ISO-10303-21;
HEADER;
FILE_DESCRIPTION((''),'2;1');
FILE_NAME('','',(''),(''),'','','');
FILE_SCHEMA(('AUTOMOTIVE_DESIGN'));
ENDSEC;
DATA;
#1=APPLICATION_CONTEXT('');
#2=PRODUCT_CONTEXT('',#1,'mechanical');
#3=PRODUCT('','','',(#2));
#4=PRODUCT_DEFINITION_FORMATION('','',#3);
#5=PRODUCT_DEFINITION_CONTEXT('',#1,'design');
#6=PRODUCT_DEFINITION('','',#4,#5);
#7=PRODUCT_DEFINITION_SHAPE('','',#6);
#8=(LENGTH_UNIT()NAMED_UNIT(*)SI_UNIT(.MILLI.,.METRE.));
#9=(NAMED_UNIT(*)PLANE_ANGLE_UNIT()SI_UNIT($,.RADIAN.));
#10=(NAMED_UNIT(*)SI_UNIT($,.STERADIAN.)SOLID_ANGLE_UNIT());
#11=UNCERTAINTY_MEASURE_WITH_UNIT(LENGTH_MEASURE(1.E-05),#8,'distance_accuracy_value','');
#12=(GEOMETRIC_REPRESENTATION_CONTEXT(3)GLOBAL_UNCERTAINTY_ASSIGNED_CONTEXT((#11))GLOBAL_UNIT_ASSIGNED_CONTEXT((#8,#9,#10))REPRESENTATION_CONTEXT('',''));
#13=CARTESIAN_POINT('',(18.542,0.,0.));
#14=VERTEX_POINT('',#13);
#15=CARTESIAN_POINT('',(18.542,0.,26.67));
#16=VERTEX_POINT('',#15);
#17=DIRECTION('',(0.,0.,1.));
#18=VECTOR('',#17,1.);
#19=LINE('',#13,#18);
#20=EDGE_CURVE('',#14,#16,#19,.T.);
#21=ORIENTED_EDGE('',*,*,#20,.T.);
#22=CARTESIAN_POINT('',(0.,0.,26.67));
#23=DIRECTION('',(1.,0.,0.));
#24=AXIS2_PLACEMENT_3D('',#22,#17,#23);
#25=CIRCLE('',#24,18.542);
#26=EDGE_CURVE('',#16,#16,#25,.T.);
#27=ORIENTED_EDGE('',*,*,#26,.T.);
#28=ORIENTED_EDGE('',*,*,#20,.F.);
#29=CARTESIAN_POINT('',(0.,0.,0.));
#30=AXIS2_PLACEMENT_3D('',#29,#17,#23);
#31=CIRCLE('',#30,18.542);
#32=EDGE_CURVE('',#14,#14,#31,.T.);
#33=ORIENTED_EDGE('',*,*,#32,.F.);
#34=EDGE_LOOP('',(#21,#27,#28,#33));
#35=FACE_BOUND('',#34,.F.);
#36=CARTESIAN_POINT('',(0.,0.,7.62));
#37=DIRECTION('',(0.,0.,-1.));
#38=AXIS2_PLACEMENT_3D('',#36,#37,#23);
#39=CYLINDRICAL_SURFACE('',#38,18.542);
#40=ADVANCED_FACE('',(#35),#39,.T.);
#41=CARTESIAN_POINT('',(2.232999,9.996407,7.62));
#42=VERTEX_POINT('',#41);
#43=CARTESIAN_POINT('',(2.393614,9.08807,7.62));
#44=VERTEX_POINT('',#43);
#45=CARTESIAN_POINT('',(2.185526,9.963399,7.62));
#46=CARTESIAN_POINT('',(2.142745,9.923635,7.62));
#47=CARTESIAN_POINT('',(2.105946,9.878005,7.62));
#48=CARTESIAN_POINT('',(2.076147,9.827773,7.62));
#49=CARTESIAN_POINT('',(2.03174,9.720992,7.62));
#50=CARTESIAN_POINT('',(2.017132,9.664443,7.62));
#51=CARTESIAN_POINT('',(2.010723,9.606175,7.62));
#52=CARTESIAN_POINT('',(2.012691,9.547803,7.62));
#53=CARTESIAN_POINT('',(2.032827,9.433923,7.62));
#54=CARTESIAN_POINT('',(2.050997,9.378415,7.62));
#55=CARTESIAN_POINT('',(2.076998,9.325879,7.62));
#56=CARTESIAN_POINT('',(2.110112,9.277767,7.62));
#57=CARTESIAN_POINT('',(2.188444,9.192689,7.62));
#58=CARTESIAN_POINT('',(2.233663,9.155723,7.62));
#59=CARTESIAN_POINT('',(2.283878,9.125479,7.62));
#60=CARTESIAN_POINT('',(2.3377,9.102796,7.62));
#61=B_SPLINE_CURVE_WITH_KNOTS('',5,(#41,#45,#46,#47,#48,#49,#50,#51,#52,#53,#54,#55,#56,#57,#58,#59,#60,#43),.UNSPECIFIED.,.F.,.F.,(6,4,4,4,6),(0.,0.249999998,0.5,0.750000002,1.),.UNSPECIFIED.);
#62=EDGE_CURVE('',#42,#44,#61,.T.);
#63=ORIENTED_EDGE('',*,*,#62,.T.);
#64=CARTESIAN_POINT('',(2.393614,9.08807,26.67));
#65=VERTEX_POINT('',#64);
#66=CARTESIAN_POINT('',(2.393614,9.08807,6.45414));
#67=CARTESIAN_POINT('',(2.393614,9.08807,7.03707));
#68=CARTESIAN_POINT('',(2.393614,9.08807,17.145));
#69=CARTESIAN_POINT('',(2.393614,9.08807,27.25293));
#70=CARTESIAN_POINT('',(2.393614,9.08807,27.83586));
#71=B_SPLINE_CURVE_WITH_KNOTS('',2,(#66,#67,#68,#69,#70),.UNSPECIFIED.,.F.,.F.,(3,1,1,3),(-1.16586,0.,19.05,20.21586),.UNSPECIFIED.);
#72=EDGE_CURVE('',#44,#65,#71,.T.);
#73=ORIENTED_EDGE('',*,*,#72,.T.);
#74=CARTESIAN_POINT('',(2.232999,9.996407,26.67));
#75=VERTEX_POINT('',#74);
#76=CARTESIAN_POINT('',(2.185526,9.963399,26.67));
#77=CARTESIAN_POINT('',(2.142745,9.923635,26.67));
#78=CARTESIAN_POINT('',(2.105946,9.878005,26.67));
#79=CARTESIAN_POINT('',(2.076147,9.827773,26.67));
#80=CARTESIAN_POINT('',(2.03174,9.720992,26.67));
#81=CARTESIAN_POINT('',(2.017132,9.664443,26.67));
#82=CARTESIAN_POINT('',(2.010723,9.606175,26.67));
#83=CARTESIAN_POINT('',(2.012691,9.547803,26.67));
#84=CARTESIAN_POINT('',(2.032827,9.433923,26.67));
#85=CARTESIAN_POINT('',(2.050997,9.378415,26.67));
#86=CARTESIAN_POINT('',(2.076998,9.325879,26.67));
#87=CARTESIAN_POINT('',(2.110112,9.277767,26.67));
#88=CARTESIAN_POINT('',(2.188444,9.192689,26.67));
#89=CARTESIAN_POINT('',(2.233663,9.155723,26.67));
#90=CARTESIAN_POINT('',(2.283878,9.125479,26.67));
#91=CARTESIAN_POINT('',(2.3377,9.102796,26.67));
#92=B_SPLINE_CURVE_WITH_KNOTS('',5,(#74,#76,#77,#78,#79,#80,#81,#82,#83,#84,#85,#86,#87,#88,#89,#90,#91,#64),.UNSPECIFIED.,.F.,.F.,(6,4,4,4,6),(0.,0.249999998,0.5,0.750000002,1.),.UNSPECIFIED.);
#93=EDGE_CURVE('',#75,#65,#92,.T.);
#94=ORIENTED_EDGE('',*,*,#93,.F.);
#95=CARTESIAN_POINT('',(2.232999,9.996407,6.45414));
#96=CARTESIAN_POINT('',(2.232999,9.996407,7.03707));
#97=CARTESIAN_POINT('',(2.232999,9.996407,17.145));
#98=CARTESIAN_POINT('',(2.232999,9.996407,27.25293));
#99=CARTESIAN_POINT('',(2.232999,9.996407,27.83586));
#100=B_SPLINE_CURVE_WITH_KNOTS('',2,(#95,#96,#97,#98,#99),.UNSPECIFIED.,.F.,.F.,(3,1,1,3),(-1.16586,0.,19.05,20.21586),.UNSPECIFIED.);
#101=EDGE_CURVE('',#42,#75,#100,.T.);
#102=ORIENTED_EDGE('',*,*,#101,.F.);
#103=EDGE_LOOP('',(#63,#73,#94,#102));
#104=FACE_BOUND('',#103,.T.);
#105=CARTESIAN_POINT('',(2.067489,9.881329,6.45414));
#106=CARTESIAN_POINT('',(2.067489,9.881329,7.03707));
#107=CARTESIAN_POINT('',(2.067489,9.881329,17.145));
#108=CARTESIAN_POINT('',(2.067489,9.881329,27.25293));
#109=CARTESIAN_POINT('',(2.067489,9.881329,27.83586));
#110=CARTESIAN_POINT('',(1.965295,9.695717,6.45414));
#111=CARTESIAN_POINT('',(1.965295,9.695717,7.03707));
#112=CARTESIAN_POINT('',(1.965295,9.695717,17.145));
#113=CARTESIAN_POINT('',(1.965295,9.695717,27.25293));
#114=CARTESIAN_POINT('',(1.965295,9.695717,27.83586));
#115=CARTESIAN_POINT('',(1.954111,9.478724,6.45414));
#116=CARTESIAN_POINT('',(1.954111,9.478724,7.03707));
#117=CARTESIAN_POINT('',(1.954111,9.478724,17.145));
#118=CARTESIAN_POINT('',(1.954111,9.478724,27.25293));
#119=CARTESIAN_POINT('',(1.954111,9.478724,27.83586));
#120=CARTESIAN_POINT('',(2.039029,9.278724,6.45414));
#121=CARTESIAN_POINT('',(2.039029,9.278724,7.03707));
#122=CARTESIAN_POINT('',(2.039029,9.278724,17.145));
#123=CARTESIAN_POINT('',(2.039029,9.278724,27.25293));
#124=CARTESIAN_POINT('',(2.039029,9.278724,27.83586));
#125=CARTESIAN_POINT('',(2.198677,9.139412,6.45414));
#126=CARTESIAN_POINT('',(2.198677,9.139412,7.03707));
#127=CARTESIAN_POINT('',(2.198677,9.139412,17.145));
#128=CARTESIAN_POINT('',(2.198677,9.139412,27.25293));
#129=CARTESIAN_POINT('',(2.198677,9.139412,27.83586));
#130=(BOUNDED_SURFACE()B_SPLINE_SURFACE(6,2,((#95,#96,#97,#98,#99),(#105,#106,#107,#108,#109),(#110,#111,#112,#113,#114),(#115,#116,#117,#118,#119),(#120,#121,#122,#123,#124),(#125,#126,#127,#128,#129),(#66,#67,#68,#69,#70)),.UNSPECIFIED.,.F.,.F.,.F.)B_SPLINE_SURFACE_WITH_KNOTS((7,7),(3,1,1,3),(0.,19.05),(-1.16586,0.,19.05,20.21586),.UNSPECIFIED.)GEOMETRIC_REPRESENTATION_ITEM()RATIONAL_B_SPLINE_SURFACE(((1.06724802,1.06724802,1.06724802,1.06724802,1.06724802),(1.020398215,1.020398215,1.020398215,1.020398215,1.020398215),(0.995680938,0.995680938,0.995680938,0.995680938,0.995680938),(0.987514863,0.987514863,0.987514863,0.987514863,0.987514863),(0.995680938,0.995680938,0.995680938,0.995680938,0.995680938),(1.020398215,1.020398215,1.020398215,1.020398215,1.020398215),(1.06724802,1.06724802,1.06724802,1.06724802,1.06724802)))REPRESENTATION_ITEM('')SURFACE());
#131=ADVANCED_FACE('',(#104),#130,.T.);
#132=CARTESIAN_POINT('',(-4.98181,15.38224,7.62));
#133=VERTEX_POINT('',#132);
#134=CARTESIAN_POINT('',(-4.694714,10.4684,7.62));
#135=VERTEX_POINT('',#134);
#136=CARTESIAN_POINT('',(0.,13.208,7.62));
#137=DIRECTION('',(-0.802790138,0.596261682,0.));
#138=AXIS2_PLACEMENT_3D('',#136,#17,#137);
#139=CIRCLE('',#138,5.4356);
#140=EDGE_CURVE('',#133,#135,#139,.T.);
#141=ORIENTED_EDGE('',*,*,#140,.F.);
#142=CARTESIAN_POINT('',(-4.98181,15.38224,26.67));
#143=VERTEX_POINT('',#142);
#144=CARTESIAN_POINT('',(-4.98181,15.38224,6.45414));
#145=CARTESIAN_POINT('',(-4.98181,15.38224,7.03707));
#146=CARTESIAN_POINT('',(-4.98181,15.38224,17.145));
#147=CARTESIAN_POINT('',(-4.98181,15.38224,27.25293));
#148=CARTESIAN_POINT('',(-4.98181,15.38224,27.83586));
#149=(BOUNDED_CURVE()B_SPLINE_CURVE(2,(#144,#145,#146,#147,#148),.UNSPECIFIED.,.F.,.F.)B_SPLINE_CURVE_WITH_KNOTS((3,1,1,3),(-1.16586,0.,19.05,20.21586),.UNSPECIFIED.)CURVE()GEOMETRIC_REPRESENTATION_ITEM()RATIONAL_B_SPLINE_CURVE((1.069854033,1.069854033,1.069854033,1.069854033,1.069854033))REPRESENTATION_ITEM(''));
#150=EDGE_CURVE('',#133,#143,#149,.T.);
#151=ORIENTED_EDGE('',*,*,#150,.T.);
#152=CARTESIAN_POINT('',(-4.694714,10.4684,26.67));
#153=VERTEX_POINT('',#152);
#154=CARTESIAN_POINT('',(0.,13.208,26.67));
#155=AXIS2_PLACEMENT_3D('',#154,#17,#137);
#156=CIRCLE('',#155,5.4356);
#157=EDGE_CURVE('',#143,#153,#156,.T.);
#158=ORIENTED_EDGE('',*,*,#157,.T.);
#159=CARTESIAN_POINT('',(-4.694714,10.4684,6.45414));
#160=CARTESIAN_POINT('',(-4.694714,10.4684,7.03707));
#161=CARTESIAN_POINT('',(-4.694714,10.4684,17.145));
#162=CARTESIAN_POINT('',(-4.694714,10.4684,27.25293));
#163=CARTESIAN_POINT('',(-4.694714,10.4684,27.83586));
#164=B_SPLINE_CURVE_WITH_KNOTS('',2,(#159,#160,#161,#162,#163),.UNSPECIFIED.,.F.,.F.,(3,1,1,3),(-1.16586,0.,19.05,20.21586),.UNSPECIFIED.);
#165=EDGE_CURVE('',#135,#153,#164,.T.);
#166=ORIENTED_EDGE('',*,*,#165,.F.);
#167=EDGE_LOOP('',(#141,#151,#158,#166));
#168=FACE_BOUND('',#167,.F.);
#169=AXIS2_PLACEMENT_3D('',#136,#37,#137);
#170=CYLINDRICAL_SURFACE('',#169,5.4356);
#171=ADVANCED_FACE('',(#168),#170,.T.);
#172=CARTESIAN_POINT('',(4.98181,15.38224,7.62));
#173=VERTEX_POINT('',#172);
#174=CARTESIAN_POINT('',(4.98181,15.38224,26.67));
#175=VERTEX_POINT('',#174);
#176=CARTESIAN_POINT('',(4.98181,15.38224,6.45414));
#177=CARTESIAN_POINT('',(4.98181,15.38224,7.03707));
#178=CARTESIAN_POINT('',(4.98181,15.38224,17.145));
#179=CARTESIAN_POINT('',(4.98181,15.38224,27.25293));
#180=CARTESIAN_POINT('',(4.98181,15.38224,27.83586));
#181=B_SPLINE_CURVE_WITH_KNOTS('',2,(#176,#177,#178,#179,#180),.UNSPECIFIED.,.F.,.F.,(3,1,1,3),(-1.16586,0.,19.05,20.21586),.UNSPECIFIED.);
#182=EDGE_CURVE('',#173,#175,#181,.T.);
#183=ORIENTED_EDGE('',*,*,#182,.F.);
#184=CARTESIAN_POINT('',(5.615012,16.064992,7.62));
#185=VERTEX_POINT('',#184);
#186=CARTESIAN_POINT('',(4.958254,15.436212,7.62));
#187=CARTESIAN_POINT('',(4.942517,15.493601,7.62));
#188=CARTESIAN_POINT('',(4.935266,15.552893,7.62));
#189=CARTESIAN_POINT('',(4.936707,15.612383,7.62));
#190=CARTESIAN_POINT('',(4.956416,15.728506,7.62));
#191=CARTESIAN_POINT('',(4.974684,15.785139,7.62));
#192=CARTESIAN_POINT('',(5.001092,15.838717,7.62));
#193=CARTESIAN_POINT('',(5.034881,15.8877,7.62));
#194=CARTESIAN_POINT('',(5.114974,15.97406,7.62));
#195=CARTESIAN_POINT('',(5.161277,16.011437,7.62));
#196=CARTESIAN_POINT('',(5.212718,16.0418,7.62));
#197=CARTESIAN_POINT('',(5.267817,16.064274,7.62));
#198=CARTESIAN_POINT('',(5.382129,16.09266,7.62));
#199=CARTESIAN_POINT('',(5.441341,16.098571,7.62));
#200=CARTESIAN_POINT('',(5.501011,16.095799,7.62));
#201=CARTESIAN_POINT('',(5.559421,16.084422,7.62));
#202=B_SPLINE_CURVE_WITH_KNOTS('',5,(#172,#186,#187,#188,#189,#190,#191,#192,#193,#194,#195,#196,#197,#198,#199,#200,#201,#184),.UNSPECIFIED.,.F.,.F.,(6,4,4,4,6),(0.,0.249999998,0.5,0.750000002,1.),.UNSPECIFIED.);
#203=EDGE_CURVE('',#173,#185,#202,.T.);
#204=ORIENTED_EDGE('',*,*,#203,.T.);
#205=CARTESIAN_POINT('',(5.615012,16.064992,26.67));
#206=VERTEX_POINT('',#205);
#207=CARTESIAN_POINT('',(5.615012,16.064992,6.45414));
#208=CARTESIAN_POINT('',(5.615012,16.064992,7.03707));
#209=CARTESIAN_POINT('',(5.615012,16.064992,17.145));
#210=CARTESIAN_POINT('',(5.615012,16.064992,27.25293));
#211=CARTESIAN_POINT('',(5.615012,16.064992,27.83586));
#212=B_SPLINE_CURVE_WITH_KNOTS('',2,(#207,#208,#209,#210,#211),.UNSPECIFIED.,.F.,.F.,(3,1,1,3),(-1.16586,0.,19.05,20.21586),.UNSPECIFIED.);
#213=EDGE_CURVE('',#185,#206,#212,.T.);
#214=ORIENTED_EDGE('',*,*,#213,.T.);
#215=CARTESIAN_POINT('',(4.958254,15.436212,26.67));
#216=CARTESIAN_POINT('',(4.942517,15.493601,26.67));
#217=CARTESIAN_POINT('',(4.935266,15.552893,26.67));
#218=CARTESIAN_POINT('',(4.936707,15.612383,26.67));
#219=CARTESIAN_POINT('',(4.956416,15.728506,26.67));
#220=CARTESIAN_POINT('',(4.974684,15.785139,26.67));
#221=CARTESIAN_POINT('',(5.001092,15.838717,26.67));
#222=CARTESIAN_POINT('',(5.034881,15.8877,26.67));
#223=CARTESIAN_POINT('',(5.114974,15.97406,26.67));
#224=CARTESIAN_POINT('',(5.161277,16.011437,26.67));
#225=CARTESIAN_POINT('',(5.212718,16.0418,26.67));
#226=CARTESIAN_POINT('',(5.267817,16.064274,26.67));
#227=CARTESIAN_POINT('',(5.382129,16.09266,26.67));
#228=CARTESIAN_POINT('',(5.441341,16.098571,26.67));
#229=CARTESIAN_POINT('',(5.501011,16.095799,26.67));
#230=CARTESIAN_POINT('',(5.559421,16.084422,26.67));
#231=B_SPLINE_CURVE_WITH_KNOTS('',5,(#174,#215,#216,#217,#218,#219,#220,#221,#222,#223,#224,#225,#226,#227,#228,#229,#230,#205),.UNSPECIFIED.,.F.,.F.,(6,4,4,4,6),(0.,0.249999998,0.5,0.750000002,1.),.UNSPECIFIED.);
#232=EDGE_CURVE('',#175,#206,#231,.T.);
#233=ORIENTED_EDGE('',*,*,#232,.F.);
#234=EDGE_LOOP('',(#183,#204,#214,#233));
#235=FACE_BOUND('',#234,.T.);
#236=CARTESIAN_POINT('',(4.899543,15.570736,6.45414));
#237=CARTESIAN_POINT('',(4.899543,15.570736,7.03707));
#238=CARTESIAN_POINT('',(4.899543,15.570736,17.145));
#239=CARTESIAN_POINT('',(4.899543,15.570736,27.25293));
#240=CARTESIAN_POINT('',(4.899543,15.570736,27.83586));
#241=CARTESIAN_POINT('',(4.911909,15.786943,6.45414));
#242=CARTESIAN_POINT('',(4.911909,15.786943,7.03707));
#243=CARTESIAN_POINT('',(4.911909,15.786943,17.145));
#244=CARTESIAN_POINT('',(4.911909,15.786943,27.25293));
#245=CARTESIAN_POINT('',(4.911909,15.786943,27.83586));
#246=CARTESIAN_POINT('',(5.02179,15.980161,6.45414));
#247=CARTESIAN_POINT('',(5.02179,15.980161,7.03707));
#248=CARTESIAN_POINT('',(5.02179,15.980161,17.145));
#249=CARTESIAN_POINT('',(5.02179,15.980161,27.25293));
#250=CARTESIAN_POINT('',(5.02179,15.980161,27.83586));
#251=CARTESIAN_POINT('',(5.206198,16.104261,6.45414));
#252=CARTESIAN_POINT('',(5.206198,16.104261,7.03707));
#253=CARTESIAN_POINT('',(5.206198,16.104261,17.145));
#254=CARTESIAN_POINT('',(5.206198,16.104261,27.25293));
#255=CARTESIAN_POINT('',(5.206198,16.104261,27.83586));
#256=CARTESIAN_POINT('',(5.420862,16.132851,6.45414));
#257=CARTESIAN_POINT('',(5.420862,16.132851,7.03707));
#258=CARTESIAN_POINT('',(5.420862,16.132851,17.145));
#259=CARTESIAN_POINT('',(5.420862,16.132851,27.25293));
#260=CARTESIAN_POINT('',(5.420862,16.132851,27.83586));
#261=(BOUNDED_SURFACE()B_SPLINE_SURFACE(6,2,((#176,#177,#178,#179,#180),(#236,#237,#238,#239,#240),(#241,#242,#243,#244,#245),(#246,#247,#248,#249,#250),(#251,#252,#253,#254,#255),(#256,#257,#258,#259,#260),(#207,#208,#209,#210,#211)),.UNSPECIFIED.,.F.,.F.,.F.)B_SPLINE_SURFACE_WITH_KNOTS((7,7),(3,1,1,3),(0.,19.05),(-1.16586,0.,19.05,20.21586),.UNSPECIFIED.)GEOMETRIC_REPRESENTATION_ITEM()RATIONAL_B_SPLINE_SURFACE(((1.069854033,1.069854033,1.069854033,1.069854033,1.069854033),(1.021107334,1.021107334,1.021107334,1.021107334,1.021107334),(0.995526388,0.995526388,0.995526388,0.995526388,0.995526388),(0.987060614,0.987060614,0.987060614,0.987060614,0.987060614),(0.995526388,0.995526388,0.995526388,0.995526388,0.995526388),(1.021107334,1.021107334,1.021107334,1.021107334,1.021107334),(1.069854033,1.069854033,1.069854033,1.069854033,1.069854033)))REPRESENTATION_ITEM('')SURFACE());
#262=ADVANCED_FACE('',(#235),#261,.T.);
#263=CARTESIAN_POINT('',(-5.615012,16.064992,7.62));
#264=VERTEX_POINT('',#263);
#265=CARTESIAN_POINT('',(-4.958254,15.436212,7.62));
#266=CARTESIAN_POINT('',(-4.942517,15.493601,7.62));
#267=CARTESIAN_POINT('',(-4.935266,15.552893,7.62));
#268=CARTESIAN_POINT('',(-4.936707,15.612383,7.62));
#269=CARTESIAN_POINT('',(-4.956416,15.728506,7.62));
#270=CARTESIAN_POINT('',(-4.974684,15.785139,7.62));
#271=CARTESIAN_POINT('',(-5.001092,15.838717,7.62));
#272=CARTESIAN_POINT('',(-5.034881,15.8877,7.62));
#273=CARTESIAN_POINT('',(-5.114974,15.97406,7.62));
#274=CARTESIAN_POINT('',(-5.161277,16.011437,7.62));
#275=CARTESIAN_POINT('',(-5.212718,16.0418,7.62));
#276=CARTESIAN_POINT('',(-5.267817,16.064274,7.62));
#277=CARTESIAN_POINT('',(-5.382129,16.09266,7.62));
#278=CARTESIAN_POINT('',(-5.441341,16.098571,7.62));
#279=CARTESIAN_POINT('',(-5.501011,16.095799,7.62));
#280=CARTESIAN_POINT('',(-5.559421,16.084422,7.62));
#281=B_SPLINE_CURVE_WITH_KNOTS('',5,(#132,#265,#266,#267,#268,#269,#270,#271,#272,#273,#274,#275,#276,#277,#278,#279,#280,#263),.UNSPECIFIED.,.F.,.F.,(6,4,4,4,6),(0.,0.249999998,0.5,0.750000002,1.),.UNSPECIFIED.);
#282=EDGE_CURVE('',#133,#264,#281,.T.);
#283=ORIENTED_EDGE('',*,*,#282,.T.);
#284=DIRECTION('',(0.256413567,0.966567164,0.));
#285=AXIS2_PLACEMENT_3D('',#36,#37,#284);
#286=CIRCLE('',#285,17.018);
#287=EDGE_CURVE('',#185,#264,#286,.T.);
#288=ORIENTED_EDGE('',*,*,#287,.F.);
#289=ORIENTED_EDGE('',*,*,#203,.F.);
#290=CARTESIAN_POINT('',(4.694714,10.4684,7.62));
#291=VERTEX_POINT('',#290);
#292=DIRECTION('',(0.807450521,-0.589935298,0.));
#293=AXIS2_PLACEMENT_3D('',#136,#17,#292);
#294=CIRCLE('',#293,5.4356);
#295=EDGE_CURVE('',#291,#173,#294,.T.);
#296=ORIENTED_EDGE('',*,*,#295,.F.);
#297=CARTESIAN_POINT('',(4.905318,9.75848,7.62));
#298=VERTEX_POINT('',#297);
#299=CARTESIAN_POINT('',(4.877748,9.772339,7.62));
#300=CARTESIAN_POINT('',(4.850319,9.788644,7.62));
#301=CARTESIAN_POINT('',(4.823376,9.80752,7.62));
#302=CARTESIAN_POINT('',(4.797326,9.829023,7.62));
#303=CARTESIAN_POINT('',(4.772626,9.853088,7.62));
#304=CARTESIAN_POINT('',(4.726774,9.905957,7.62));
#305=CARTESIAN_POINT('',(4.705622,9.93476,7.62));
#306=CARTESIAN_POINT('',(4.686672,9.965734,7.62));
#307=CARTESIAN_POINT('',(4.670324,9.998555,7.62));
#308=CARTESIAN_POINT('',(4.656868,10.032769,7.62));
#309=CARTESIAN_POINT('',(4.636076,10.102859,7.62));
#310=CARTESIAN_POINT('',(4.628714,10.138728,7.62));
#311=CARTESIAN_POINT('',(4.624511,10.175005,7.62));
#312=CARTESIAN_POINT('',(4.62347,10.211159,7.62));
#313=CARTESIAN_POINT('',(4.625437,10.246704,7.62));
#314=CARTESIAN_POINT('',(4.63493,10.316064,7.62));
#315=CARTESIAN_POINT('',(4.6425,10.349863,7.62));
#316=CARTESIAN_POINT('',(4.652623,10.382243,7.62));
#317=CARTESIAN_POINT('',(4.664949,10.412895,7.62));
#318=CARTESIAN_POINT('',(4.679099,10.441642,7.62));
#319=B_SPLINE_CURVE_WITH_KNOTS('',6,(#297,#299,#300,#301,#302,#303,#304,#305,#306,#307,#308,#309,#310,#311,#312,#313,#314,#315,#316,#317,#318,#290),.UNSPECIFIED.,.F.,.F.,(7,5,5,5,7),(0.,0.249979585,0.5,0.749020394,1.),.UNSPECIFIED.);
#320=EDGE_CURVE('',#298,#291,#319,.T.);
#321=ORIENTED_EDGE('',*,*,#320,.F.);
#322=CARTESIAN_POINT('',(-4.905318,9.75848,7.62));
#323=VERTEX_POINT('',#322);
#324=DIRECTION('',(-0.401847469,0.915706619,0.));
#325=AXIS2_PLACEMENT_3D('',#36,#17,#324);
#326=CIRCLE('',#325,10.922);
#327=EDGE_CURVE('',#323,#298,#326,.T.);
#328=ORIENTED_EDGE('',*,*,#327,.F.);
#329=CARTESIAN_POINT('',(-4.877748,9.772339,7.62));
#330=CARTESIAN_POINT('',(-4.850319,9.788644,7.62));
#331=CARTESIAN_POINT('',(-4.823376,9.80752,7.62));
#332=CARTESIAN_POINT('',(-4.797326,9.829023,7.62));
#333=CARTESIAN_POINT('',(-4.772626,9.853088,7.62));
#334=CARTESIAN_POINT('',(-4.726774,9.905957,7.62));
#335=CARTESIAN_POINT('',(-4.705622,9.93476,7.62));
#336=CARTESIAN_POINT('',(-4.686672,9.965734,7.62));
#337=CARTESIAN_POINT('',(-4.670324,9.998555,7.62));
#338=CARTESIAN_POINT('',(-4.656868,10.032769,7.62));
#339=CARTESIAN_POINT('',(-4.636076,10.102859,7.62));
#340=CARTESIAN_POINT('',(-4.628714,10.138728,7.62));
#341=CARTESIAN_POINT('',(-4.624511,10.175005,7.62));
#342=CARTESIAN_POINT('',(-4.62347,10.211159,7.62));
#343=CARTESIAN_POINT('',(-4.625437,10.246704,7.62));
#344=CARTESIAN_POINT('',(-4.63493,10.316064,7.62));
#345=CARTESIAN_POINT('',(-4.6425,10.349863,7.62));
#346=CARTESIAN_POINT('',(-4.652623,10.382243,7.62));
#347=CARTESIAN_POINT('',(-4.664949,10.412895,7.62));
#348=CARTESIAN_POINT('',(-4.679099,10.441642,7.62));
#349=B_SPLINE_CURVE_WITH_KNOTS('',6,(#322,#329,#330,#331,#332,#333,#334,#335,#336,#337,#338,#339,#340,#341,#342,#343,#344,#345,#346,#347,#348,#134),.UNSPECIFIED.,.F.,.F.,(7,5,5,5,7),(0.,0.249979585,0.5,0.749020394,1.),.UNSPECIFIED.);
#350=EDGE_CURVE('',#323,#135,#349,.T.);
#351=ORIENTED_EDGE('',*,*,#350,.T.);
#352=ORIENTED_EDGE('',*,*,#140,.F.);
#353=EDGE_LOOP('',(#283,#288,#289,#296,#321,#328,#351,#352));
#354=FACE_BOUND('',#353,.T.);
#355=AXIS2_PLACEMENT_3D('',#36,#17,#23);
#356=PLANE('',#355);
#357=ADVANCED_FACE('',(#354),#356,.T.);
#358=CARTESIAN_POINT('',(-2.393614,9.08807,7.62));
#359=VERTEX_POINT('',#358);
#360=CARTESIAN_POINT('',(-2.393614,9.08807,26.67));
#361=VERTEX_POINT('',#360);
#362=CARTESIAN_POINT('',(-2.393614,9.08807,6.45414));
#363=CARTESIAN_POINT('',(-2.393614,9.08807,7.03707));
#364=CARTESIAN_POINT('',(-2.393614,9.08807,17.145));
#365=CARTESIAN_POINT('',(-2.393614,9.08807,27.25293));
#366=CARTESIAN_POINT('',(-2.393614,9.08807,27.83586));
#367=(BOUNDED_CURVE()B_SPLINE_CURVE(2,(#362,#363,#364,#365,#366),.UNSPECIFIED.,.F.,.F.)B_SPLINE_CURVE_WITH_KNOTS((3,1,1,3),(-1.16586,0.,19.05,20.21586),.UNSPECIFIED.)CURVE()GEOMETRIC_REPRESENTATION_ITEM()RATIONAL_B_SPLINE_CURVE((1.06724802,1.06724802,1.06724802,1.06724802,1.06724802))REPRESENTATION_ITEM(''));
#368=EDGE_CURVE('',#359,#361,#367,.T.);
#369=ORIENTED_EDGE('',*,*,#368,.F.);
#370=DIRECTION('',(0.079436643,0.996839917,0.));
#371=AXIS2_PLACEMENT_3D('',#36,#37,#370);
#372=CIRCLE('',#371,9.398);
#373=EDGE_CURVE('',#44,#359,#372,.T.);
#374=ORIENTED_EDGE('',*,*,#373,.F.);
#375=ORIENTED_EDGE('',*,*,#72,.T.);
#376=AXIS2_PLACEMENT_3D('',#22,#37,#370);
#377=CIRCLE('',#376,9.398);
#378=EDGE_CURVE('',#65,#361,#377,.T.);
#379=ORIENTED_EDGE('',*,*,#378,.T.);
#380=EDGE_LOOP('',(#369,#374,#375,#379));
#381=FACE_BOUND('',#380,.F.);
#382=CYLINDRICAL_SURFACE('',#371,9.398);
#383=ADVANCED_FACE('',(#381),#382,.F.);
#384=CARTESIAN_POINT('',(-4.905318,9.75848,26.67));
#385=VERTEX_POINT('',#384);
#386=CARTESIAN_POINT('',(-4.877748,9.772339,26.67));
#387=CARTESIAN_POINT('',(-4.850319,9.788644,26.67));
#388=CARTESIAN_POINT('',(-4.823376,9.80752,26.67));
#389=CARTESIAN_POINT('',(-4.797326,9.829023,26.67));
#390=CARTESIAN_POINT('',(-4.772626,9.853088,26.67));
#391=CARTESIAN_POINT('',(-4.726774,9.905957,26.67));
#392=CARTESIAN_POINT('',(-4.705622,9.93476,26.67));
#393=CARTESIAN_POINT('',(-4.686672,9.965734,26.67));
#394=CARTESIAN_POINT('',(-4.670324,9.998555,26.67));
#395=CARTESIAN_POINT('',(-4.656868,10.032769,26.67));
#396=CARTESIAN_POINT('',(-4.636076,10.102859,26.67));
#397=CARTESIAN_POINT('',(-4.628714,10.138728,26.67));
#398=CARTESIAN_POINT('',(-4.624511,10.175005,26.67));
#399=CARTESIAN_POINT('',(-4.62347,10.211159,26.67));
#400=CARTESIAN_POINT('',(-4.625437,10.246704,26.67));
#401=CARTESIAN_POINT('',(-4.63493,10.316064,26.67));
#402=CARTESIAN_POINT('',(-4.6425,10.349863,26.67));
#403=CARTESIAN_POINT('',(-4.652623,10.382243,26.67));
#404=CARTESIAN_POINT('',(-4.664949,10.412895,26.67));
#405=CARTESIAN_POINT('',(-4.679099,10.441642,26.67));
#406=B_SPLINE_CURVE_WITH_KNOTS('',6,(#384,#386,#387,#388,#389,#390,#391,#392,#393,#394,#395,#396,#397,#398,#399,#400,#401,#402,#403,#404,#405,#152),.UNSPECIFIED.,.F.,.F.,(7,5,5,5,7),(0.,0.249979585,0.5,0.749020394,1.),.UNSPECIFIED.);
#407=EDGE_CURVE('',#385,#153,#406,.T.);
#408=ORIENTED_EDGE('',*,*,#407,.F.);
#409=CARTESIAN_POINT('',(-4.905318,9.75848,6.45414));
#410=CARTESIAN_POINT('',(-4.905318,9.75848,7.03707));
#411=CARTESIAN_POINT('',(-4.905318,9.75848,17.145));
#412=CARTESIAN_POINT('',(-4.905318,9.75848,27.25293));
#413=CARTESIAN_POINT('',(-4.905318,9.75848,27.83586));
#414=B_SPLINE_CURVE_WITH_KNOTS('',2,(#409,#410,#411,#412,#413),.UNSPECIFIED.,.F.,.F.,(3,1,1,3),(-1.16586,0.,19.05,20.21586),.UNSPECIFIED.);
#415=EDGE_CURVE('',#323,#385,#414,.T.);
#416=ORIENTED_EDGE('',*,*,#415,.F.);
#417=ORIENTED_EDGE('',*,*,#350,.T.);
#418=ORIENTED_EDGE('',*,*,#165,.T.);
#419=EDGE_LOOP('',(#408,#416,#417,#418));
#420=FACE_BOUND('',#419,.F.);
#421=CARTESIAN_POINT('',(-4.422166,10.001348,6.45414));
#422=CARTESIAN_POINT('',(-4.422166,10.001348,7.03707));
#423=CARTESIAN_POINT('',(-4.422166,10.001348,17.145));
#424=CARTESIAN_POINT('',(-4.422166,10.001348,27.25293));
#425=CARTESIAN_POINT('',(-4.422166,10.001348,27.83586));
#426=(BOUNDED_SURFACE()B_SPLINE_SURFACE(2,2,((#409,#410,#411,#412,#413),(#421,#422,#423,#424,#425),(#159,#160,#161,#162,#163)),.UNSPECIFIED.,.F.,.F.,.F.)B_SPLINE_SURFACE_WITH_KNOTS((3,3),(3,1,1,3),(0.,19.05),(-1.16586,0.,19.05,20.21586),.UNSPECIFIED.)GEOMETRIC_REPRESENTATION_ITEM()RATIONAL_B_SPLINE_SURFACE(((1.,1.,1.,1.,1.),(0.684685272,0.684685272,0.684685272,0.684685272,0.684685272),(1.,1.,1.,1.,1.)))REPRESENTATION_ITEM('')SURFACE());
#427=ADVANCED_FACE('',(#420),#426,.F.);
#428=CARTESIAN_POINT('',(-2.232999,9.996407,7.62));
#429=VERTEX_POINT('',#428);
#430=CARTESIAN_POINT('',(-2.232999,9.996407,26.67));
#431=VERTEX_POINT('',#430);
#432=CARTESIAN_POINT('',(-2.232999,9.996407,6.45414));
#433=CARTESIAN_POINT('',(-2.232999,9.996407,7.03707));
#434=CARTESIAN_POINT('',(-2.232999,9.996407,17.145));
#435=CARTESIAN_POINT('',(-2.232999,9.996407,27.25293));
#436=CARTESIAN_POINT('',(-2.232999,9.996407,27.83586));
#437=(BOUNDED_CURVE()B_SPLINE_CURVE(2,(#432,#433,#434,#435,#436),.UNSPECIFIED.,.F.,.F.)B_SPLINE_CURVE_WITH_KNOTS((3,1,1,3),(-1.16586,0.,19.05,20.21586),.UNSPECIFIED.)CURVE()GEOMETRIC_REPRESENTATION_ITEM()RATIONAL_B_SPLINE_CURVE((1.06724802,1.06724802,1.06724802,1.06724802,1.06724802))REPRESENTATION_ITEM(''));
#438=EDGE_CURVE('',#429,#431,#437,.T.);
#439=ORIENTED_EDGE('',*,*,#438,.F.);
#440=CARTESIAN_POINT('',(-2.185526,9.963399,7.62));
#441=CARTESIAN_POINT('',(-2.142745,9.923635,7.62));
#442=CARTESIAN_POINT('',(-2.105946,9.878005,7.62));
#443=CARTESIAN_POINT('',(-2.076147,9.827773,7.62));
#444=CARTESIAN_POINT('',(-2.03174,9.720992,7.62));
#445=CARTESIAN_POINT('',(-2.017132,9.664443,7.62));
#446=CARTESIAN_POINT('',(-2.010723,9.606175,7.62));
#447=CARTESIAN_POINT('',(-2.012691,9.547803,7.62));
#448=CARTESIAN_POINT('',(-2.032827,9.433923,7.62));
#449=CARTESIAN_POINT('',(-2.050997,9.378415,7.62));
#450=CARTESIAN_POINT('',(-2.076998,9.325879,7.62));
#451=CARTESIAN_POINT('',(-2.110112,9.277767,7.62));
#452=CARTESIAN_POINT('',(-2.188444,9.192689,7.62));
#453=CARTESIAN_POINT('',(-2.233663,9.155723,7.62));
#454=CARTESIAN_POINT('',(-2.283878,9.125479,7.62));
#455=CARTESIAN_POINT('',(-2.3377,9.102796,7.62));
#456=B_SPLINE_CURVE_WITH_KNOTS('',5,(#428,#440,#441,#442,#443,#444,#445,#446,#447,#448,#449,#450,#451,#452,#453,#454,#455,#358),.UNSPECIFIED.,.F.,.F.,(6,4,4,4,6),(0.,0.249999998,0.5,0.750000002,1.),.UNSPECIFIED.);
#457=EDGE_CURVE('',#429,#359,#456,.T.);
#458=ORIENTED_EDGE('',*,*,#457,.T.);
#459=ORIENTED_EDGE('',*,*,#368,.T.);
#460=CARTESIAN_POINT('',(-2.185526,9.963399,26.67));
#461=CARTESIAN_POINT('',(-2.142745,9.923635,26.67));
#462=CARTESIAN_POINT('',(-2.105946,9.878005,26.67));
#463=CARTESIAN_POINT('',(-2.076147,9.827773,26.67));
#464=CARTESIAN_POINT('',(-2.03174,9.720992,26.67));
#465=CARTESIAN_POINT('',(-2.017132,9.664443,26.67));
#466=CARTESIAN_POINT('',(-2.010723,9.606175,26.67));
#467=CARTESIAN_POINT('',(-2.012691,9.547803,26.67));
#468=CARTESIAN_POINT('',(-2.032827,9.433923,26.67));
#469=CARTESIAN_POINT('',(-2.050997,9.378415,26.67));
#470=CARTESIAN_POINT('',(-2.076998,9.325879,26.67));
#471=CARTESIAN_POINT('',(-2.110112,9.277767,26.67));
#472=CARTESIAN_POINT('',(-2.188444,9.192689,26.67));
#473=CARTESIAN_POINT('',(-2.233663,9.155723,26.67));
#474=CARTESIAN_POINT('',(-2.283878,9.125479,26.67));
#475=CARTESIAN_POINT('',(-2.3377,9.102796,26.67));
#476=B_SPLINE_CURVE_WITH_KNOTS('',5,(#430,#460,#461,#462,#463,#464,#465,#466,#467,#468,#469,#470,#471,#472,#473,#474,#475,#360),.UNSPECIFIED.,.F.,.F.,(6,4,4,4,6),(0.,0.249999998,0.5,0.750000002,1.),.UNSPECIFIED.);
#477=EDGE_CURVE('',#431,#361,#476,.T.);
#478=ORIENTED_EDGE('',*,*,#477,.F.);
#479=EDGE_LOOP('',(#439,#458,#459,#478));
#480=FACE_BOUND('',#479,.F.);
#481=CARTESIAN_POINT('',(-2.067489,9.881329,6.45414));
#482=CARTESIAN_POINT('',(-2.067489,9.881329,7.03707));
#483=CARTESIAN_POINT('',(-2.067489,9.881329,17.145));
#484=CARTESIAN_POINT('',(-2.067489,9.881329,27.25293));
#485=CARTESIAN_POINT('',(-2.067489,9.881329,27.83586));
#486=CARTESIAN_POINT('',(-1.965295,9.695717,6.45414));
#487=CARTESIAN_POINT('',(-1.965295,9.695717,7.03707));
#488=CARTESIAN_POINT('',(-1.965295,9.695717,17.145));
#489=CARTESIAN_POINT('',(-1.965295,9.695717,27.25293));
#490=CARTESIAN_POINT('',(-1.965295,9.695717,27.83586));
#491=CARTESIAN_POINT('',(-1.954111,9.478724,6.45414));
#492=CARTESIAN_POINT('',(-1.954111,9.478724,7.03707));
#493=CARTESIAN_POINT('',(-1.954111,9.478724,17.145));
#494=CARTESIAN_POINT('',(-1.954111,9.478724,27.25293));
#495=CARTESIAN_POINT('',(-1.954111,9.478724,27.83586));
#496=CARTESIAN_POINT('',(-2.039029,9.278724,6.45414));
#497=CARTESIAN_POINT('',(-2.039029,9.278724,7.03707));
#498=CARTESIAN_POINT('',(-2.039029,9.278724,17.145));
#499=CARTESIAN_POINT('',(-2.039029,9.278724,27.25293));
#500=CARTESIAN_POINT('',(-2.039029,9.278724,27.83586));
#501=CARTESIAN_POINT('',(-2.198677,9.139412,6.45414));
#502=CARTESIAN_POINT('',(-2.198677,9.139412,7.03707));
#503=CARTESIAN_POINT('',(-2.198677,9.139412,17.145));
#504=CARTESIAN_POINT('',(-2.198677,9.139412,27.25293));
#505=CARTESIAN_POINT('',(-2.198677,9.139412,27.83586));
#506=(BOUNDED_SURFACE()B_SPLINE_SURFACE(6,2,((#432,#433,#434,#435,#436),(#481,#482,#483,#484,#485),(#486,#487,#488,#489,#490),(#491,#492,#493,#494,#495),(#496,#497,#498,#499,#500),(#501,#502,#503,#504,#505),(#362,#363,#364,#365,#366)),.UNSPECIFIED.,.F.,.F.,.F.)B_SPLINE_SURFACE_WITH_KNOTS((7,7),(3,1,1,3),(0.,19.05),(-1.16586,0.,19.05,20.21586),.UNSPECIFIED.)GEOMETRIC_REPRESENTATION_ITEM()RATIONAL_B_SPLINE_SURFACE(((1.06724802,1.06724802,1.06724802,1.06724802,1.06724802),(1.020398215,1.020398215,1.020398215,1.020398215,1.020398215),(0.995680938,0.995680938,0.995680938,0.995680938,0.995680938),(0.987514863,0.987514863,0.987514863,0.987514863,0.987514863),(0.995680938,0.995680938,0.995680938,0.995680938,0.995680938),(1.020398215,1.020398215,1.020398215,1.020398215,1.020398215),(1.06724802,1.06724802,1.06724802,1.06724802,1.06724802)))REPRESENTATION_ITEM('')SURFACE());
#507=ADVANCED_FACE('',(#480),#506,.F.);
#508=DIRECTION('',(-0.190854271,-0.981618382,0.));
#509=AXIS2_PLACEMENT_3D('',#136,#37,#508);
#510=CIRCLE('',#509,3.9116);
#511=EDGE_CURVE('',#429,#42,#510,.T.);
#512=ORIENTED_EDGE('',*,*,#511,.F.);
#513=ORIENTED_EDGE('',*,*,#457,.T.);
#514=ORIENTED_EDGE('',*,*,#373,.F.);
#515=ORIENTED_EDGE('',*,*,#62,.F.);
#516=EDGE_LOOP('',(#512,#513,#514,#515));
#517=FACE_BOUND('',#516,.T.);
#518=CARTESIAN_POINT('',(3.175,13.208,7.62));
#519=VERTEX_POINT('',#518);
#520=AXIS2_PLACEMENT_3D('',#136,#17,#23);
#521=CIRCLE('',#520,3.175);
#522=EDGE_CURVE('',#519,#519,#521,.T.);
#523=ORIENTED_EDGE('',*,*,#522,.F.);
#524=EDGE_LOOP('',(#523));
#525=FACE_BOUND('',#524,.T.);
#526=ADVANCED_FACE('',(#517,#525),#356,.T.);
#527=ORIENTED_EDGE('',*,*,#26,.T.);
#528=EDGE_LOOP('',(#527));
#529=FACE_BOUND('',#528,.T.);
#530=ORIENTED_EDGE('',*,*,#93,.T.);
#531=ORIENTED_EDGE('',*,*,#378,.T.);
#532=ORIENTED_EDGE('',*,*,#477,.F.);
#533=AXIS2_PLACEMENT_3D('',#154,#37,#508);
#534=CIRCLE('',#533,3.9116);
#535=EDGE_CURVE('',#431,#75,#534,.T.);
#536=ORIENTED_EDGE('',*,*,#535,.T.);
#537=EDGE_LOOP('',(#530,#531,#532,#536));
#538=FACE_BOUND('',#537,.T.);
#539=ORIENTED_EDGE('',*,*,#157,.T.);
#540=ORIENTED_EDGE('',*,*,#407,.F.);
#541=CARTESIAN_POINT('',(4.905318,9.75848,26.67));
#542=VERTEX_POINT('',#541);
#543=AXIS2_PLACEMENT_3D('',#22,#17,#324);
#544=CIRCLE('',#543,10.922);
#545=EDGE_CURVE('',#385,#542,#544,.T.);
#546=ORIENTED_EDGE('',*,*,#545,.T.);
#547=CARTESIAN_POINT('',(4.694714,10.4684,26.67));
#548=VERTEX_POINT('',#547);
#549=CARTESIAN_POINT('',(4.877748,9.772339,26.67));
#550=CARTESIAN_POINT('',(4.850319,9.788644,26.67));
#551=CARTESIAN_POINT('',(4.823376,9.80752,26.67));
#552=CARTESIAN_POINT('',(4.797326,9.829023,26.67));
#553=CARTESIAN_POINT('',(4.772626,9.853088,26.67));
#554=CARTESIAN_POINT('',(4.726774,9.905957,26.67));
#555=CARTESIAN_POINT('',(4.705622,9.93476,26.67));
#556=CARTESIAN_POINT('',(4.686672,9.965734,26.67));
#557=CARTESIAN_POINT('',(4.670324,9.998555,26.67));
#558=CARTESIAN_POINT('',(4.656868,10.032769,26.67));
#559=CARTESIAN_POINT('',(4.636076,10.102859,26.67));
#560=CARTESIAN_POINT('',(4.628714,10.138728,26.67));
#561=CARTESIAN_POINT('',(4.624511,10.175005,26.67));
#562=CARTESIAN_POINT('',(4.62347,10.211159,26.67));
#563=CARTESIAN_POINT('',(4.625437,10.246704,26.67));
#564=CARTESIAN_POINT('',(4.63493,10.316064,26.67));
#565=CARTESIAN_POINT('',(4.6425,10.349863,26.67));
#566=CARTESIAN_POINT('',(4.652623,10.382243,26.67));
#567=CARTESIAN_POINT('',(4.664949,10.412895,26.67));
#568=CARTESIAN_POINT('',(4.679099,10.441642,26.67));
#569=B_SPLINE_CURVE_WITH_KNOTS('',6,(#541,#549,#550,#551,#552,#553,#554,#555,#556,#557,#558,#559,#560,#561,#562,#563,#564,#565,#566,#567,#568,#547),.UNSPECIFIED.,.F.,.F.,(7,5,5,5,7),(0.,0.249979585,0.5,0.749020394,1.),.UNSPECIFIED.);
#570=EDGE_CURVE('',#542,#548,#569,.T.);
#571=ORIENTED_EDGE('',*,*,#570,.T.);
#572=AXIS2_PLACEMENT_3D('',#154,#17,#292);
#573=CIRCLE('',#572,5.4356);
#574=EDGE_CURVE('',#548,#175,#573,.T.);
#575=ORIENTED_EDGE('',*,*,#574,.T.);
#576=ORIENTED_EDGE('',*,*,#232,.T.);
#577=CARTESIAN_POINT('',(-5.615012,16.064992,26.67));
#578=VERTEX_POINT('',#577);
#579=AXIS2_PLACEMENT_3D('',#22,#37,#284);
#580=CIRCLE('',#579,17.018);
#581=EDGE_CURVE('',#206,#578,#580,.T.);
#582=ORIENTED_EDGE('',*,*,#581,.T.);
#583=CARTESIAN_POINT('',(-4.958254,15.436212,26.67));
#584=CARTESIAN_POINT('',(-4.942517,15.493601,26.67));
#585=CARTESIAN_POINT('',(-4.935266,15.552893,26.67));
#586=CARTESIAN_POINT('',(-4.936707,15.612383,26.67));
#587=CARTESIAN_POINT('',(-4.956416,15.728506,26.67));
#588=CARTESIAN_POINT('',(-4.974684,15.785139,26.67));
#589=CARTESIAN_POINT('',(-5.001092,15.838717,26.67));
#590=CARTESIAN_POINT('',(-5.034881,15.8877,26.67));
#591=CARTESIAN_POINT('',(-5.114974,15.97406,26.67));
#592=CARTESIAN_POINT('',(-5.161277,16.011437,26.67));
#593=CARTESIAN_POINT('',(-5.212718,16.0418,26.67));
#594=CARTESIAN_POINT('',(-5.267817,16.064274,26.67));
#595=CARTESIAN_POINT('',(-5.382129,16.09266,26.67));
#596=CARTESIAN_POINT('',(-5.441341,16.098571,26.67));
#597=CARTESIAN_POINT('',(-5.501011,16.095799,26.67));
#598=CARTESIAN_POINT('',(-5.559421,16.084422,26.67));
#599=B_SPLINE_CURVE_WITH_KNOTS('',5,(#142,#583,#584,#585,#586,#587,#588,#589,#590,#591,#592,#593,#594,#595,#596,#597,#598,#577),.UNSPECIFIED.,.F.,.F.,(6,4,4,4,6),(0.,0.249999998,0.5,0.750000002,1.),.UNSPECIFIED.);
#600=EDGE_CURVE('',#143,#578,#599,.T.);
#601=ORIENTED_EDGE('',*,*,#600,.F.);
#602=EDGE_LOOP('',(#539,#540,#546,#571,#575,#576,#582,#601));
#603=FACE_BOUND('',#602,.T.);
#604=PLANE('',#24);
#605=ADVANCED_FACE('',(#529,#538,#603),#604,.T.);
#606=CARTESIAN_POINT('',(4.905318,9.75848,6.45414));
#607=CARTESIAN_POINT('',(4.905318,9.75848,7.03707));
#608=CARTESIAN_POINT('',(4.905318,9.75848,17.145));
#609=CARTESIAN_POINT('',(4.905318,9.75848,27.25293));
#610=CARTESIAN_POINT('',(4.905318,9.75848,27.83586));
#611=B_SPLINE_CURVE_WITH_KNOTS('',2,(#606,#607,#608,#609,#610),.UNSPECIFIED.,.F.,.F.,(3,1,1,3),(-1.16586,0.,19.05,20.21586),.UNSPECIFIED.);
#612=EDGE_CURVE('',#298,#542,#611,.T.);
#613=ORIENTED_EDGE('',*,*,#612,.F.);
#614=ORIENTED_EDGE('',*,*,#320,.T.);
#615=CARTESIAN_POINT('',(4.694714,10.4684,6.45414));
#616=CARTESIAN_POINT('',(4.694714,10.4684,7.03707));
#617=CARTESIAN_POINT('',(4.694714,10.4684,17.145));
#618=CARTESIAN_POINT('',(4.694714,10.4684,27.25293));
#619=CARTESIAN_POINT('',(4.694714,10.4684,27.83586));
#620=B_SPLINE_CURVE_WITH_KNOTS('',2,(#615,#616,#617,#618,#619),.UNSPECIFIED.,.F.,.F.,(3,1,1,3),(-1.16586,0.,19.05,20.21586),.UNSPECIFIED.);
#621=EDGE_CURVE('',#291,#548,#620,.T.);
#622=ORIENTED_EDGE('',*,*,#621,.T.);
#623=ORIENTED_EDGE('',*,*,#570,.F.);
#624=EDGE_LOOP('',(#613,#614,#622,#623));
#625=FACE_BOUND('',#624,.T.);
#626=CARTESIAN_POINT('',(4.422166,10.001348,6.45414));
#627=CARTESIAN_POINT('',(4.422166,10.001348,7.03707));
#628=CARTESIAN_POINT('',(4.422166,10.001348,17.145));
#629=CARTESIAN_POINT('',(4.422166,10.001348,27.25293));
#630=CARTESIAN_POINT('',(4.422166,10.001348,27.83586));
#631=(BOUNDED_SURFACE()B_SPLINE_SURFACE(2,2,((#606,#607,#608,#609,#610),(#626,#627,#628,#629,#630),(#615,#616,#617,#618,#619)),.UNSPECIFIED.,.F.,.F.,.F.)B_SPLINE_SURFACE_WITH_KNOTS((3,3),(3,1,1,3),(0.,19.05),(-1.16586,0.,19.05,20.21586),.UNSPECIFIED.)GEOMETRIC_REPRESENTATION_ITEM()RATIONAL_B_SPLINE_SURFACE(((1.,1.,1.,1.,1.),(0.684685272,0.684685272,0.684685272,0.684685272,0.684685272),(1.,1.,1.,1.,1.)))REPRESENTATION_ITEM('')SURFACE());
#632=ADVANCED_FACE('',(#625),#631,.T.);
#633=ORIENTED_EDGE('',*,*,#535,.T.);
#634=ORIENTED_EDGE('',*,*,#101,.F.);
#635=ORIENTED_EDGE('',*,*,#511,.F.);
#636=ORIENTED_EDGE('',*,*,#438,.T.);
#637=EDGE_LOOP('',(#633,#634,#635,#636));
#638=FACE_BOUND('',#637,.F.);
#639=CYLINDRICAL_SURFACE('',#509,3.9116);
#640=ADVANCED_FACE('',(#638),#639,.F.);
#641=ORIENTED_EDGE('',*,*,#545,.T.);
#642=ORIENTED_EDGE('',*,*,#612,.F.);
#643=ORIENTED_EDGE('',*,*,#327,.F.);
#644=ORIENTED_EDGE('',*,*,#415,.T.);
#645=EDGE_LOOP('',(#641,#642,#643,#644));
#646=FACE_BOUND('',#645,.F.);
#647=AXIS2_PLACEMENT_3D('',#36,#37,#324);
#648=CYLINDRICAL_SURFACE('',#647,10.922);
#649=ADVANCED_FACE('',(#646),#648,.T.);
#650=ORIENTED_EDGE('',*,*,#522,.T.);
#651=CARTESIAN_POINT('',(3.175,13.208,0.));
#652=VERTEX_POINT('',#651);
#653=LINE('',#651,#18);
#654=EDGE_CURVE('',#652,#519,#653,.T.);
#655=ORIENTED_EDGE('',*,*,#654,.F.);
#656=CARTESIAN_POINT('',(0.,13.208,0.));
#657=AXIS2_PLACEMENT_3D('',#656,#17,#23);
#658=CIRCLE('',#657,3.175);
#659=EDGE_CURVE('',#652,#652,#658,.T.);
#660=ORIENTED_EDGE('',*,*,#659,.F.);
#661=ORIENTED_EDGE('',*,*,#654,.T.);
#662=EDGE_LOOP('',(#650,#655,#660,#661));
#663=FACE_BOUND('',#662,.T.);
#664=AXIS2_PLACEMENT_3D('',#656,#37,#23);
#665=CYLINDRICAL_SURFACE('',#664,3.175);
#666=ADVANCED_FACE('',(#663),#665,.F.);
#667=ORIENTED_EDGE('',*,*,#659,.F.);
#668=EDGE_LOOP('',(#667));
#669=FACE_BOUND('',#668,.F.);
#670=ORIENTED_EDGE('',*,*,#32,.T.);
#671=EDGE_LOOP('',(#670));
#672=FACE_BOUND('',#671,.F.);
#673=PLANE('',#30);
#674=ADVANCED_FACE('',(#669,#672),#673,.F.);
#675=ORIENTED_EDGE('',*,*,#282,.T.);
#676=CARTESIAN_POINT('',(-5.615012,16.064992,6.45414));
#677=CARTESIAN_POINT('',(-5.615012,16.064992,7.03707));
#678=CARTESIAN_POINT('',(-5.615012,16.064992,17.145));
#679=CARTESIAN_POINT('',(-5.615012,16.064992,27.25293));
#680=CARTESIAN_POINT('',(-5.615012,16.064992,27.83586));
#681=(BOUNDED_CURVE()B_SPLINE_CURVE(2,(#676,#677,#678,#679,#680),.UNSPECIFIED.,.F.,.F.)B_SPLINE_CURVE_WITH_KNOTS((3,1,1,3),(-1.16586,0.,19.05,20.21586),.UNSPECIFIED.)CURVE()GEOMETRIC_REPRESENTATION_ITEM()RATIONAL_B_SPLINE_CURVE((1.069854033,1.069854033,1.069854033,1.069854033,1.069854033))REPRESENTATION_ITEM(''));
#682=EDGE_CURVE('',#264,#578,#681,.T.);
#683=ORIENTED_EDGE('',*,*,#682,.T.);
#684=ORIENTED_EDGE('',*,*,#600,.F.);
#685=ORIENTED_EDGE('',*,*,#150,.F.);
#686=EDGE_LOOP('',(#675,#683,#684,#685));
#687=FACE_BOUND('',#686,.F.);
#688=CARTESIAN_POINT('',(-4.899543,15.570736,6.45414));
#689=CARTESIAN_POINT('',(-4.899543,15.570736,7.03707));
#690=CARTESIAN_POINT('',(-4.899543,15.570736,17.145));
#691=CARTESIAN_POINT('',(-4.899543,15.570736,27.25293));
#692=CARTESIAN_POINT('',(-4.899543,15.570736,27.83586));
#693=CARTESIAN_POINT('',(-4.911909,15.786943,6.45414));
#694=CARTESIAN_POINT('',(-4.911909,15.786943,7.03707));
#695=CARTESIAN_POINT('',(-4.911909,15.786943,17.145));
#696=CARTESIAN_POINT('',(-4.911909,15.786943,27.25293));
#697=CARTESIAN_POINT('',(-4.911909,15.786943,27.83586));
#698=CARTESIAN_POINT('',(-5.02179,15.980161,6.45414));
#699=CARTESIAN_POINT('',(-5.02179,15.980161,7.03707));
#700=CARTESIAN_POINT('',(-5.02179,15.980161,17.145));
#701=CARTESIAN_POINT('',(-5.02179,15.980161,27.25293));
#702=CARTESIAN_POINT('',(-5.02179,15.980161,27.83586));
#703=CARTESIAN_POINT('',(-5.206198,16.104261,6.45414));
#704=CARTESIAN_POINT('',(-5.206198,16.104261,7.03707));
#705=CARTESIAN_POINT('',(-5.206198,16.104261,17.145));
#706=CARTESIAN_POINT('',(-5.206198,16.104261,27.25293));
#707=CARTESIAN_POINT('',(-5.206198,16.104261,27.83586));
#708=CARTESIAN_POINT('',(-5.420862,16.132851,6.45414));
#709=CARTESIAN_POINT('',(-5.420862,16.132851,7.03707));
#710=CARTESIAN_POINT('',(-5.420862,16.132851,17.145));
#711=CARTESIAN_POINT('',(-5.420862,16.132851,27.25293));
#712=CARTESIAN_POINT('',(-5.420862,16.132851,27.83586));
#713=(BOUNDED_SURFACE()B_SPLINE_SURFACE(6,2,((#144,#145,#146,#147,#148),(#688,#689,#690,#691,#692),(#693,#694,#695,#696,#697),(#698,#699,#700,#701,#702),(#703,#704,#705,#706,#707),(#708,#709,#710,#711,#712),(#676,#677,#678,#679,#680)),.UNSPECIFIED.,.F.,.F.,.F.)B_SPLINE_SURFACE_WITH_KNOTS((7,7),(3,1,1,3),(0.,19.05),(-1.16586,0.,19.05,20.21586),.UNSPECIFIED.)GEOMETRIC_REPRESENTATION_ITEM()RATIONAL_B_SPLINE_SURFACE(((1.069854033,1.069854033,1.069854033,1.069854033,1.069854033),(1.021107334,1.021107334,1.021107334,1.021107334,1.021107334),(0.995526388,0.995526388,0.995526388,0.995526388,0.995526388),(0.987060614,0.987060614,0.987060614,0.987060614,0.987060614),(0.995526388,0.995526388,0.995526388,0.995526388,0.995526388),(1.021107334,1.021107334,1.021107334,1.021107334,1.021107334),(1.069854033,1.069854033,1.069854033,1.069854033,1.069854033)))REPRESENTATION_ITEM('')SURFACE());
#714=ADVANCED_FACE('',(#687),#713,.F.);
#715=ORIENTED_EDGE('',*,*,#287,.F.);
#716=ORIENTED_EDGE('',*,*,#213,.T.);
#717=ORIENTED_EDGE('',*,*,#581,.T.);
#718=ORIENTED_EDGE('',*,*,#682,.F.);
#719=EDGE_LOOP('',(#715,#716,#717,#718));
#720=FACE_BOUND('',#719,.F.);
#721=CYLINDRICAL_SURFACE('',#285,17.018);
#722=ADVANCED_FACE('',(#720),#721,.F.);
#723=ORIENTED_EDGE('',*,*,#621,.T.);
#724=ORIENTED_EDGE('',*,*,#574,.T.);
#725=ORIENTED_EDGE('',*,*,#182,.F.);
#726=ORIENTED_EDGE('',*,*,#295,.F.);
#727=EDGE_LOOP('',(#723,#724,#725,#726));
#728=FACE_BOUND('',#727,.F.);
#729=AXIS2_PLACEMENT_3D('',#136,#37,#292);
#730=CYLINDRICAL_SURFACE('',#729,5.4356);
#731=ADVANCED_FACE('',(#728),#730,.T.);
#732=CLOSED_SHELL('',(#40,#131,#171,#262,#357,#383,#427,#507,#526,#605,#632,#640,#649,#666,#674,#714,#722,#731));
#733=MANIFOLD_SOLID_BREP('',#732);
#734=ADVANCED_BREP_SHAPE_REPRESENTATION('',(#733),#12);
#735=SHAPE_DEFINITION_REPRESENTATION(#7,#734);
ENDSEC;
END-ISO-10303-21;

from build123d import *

# Parameters (mm, degrees)
F0_R     = 18.542
F0_R_2   = 3.175
F1_DEPTH = 7.62
F2_R     = 18.542
F3_DEPTH = 19.05
F4_R     = 0.508


with BuildPart() as f1:
    # F0 (on Top) → F1 (new body)
    with BuildSketch(Plane.XY):
        Circle(F0_R)
        with Locations((0, 13.208)):
            Circle(F0_R_2, mode=Mode.SUBTRACT)
    extrude(amount=F1_DEPTH)

    # F2 (on face) → F3 (join)
    with BuildSketch(Plane.XY.offset(7.62)):
        Circle(F2_R)
        with BuildLine():
            ThreePointArc((-4.3636460762, 16.44904), (-5.435558049, 13.2293554581), (-4.3889780516, 10.0013476923))
            ThreePointArc((-4.3889780516, 10.0013476923), (0, -10.922), (4.3889780516, 10.0013476923))
            ThreePointArc((4.3889780516, 10.0013476923), (5.435558049, 13.2293554581), (4.3636460762, 16.44904))
            ThreePointArc((4.3636460762, 16.44904), (0, -17.018), (-4.3636460762, 16.44904))
        make_face(mode=Mode.SUBTRACT)
        with BuildLine():
            ThreePointArc((-0.7465455676, 9.3683015385), (0, 17.1196), (0.7465455676, 9.3683015385))
            ThreePointArc((0.7465455676, 9.3683015385), (0, -9.398), (-0.7465455676, 9.3683015385))
        make_face(mode=Mode.SUBTRACT)
    extrude(amount=F3_DEPTH)

    # F4
    f4_edges = [f1.edges().sort_by_distance(p)[0] for p in [
        (0.746546, 9.368302, 17.145),
        (4.388978, 10.001348, 17.145),
        (4.363646, 16.44904, 17.145),
        (-4.388978, 10.001348, 17.145),
        (-4.363646, 16.44904, 17.145),
        (-0.746546, 9.368302, 17.145),
    ]]
    fillet(f4_edges, radius=F4_R)


solid = f1.part
